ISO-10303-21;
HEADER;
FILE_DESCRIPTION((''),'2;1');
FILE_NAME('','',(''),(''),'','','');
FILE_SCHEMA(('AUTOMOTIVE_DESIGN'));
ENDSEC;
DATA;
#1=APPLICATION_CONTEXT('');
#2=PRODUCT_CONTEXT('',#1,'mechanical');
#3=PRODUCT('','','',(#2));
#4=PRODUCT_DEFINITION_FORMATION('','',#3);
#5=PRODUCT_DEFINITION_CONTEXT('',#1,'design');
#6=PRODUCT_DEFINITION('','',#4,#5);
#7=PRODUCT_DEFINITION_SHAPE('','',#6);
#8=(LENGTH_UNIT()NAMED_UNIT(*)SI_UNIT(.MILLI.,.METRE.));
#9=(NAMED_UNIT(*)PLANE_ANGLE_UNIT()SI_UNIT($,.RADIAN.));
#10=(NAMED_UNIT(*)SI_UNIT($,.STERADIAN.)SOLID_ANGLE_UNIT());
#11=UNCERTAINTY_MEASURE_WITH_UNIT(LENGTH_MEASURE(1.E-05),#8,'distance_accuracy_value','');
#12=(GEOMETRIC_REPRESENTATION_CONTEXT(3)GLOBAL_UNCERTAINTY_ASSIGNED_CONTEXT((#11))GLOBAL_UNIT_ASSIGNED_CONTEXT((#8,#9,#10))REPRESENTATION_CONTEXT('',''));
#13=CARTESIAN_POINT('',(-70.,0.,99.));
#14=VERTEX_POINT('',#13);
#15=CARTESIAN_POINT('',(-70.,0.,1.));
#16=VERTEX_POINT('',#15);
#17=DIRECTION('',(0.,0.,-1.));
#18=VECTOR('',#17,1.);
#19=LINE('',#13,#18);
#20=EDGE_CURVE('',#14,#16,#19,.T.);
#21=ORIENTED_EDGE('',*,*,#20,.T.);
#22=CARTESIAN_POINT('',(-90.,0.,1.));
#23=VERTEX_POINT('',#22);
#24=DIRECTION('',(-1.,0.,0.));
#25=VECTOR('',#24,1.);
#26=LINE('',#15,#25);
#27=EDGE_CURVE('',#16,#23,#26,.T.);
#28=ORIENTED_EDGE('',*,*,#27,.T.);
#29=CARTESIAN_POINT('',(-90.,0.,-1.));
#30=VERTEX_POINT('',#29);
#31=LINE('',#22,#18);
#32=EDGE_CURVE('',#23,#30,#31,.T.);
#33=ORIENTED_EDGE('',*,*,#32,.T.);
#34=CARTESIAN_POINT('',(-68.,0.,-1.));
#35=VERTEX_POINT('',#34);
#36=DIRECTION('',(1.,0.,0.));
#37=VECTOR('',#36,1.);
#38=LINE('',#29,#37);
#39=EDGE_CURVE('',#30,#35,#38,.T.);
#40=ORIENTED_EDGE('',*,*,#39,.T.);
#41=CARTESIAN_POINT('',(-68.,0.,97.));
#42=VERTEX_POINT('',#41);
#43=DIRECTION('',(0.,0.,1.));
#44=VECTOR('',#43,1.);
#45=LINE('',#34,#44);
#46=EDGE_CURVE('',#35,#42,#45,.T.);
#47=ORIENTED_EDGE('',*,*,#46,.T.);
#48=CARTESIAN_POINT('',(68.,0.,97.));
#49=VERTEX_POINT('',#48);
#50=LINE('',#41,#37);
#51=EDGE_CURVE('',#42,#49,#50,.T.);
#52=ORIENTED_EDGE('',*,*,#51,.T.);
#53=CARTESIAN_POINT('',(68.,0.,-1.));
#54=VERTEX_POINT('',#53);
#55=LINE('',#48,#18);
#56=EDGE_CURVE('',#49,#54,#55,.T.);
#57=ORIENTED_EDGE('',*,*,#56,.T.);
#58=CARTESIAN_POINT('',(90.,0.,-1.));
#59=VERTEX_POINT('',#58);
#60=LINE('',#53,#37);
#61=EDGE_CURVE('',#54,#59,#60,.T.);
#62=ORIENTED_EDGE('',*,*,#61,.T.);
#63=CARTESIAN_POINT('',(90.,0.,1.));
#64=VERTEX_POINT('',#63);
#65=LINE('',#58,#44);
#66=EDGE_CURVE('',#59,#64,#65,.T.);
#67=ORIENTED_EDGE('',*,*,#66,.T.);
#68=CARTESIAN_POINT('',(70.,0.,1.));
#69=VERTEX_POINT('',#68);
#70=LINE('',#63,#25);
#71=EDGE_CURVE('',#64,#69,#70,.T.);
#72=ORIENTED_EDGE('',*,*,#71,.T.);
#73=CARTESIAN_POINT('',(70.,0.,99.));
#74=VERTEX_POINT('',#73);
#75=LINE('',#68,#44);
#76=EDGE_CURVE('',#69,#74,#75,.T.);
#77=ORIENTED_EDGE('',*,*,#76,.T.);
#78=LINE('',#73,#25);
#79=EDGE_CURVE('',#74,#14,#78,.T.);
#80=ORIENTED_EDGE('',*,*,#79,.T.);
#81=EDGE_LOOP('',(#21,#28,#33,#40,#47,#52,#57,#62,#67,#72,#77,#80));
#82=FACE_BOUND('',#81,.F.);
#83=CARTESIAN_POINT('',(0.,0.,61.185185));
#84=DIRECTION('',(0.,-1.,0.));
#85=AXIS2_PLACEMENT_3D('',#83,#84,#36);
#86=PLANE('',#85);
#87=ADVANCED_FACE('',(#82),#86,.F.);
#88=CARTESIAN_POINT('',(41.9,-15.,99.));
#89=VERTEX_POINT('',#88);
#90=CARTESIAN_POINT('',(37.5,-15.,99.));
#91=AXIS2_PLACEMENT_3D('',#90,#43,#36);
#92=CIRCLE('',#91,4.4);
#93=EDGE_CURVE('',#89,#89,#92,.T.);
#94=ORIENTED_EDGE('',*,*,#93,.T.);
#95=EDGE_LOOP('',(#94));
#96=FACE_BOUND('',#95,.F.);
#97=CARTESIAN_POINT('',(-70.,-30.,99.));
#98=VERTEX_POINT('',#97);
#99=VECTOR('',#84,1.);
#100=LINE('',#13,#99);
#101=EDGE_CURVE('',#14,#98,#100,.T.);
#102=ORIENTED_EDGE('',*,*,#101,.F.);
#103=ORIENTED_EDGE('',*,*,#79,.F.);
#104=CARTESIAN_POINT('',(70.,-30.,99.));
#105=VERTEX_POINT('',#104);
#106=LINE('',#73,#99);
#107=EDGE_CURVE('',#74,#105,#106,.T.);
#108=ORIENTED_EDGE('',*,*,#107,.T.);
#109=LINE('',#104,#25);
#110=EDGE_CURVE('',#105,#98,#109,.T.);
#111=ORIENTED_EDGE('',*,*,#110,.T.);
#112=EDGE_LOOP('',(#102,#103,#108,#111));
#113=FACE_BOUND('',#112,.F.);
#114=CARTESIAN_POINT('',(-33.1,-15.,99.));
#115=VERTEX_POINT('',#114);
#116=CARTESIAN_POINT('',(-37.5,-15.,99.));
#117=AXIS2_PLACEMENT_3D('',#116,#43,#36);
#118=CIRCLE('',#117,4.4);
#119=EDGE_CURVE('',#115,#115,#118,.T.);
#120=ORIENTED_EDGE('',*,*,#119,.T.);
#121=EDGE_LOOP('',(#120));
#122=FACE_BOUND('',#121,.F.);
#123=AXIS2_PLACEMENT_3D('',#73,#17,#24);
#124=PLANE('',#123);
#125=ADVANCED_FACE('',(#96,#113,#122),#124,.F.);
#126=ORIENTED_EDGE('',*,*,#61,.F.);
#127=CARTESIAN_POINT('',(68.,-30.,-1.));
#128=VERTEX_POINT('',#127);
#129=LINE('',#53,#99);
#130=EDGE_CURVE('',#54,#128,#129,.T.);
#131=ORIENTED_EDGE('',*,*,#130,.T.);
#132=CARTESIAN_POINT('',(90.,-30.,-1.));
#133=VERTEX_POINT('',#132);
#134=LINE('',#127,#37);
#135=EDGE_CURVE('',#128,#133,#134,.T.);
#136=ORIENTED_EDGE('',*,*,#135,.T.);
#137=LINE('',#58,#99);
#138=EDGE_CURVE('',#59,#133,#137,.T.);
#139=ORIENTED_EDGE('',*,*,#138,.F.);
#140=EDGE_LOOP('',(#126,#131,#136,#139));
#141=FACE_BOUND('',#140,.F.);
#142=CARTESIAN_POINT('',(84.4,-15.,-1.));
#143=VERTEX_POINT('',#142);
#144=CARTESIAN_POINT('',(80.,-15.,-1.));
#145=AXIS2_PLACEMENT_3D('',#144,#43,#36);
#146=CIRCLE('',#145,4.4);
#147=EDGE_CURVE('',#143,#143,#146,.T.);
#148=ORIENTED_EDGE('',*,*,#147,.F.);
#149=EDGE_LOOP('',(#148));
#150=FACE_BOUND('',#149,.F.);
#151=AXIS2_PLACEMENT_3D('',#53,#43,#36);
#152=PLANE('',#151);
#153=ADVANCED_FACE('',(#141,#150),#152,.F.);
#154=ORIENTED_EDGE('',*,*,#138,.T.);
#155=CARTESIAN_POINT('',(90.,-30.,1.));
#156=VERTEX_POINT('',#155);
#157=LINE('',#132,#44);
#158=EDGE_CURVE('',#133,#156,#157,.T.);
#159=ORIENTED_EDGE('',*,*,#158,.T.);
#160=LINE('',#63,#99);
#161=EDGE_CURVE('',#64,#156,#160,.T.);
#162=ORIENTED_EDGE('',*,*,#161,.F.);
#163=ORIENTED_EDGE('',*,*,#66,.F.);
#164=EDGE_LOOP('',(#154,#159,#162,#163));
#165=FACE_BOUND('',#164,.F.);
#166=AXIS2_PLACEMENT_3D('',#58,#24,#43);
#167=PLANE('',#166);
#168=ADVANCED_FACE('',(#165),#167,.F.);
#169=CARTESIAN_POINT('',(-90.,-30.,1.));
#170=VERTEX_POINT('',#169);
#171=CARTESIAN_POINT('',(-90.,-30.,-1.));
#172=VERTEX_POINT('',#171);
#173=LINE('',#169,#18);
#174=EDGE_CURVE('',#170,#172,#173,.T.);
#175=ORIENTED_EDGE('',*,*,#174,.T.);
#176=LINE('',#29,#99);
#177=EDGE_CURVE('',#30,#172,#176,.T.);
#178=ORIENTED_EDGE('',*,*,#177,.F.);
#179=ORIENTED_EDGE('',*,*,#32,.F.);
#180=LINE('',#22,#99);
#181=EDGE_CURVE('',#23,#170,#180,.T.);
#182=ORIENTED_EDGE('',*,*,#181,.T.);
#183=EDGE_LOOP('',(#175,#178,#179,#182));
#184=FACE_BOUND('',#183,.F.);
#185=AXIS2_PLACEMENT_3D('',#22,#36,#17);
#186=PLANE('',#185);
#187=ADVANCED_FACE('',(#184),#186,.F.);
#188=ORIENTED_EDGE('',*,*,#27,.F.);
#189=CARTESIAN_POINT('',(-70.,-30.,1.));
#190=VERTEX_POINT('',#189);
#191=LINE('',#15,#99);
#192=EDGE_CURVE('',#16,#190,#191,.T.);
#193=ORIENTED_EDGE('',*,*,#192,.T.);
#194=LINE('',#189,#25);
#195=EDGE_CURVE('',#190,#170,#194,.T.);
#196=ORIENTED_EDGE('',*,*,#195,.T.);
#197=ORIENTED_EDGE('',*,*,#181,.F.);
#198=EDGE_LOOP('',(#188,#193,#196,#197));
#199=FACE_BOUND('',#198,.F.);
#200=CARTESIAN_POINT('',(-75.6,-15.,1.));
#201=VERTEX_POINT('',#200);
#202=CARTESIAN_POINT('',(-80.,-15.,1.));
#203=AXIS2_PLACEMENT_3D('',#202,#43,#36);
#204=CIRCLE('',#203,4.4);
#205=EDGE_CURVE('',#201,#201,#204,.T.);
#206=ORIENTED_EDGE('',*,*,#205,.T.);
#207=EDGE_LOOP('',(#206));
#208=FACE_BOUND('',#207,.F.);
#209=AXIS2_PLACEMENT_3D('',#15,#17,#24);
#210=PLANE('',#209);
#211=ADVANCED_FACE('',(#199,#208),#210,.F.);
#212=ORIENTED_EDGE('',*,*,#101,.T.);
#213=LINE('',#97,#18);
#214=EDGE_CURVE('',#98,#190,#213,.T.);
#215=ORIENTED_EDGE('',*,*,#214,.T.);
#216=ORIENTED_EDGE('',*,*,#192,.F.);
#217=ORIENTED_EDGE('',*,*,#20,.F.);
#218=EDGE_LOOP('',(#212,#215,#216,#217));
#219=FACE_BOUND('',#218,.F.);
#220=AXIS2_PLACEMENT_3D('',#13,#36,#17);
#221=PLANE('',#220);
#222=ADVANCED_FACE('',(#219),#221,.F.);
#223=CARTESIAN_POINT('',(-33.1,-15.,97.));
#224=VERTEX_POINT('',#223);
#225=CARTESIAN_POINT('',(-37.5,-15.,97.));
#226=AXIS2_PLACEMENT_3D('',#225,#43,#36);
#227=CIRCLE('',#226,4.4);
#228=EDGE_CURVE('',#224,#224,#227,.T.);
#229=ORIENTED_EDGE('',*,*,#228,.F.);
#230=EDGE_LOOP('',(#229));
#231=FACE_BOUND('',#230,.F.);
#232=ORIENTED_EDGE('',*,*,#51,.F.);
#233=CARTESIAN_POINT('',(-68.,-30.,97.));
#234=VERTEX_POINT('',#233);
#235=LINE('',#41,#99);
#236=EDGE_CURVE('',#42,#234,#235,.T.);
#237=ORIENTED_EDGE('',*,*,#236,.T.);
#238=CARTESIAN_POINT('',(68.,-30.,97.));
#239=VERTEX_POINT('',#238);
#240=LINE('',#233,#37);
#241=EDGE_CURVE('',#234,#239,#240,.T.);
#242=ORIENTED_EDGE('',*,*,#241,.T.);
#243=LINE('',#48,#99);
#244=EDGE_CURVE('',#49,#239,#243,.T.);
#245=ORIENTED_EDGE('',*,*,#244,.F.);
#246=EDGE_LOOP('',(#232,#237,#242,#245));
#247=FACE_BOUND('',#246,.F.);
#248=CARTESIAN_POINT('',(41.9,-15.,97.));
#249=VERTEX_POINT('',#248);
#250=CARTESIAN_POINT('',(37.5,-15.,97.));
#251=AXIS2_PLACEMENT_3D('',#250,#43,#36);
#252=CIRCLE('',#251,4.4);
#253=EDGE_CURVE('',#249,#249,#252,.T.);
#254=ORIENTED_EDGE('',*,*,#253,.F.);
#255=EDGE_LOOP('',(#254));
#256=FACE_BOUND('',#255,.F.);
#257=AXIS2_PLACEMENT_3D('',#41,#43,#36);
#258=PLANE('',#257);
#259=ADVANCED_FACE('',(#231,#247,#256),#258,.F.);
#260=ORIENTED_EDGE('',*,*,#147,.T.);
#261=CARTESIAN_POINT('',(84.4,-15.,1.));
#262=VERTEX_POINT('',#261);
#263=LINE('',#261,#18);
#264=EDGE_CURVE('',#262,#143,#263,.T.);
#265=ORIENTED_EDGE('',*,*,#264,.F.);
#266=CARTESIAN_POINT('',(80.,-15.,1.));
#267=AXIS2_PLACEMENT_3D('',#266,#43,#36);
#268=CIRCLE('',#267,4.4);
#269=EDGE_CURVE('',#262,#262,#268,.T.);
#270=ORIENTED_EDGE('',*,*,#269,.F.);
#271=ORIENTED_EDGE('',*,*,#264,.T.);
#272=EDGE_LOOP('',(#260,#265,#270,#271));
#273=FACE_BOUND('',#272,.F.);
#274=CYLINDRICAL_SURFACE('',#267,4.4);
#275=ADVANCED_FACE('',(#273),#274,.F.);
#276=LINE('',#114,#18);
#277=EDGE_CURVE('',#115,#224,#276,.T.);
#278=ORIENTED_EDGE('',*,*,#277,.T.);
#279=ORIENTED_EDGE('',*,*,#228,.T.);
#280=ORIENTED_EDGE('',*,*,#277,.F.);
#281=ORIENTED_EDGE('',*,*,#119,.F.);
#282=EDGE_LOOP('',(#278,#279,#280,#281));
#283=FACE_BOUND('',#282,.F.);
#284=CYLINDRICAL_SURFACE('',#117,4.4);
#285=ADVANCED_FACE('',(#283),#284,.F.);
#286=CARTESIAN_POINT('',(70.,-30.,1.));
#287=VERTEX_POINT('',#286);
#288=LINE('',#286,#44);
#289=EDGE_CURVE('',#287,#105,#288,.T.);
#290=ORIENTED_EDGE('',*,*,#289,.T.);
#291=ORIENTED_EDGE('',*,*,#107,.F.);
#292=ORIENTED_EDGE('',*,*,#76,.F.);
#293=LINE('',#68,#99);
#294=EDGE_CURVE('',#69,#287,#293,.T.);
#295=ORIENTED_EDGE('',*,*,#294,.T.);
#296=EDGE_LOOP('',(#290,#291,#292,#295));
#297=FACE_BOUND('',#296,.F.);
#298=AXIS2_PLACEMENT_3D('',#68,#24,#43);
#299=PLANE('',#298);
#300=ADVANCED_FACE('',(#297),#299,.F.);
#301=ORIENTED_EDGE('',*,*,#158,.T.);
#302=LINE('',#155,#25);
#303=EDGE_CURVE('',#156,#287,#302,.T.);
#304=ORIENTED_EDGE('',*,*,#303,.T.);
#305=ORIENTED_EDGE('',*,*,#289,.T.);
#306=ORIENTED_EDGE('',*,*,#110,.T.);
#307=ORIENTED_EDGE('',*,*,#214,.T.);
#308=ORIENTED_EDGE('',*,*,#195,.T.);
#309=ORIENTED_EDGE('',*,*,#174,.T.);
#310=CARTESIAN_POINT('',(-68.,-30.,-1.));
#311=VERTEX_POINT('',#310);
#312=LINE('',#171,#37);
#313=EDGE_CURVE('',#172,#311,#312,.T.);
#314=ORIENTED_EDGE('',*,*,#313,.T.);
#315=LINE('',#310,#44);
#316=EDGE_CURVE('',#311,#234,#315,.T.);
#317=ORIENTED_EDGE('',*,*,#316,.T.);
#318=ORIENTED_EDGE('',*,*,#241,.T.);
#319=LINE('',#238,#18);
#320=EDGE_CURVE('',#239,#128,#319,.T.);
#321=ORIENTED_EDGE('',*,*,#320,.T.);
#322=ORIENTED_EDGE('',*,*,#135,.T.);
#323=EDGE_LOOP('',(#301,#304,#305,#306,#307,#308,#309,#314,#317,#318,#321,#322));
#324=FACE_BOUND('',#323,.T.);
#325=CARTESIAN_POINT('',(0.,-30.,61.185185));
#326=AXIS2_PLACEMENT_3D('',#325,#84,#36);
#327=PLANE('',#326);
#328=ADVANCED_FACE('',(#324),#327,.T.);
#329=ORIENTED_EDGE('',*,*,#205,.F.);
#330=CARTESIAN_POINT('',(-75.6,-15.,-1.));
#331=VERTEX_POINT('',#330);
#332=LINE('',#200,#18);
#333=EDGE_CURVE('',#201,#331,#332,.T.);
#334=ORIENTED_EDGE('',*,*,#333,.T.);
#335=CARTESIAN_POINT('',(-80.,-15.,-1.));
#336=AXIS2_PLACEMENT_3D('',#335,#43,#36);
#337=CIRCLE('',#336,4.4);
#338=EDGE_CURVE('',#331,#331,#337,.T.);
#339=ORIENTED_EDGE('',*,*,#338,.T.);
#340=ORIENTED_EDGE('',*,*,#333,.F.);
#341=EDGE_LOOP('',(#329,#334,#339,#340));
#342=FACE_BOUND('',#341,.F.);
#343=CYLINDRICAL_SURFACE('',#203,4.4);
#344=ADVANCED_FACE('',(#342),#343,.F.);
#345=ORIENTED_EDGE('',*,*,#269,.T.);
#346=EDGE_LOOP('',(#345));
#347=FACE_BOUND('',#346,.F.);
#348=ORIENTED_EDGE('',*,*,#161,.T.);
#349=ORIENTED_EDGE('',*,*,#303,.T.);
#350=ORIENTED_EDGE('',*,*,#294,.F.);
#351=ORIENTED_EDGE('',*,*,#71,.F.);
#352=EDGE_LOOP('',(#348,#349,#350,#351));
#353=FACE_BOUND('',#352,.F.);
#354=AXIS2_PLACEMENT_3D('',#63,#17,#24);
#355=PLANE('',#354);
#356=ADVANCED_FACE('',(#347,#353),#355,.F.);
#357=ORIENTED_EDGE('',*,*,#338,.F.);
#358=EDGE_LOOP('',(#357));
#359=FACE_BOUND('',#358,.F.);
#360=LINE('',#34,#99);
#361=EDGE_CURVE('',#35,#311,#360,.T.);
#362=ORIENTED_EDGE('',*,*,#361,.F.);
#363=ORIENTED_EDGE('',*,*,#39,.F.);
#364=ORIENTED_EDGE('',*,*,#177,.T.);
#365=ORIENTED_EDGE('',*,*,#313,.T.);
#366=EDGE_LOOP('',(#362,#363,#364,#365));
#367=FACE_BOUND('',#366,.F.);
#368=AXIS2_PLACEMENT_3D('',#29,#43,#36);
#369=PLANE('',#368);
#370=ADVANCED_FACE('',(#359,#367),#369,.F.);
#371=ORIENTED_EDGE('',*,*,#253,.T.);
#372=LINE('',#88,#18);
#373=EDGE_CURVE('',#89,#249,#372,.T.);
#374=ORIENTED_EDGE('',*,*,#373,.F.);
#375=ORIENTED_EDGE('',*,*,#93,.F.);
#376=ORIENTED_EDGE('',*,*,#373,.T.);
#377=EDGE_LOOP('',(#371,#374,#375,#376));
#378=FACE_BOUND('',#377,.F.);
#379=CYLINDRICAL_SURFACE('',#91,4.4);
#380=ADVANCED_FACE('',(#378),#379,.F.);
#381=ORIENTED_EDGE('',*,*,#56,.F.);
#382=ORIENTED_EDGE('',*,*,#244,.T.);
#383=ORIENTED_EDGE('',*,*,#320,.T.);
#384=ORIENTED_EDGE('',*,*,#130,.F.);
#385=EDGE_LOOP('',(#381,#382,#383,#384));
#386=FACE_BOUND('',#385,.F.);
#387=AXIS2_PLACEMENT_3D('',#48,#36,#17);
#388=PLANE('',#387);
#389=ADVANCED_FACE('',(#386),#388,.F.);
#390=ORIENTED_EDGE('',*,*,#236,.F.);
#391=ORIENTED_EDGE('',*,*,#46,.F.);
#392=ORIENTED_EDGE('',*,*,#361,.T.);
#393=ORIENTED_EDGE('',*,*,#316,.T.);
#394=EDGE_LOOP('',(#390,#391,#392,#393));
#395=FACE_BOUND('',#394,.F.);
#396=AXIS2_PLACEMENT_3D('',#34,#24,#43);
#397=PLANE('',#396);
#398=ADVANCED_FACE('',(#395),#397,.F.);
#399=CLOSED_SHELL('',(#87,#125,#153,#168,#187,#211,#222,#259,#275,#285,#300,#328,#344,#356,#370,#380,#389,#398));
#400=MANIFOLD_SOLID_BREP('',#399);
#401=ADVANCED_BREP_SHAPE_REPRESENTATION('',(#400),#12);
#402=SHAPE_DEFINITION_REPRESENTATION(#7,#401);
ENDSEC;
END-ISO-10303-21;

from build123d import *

# Parameters (mm, degrees)
F1_DEPTH = 30
F2_R     = 4.4
F3_R     = 4.4
F4_DEPTH = 25


# Not quite as in the source:
# - a feature names something its author has since deleted; it is built from what else it names


with BuildPart() as f1:
    # F0 (on Front) → F1 (new body)
    with BuildSketch(Plane.XZ):
        Polygon((90, -1), (90, 1), (70, 1), (70, 99), (-70, 99), (-70, 1), (-90, 1), (-90, -1), (-68, -1), (-68, 97), (68, 97), (68, -1), align=None)
    extrude(amount=F1_DEPTH)

    # F2 (on face) + F3 (on face) → F4 (cut)
    with BuildSketch(Plane.XY.offset(1)):
        with Locations((-80, -15)):
            Circle(F2_R)
        with Locations((80, -15)):
            Circle(F2_R)
    with BuildSketch(Plane.XY.offset(99)):
        with Locations((-37.5, -15)):
            Circle(F3_R)
        with Locations((37.5, -15)):
            Circle(F3_R)
    extrude(amount=-F4_DEPTH, mode=Mode.SUBTRACT)


solid = f1.part
